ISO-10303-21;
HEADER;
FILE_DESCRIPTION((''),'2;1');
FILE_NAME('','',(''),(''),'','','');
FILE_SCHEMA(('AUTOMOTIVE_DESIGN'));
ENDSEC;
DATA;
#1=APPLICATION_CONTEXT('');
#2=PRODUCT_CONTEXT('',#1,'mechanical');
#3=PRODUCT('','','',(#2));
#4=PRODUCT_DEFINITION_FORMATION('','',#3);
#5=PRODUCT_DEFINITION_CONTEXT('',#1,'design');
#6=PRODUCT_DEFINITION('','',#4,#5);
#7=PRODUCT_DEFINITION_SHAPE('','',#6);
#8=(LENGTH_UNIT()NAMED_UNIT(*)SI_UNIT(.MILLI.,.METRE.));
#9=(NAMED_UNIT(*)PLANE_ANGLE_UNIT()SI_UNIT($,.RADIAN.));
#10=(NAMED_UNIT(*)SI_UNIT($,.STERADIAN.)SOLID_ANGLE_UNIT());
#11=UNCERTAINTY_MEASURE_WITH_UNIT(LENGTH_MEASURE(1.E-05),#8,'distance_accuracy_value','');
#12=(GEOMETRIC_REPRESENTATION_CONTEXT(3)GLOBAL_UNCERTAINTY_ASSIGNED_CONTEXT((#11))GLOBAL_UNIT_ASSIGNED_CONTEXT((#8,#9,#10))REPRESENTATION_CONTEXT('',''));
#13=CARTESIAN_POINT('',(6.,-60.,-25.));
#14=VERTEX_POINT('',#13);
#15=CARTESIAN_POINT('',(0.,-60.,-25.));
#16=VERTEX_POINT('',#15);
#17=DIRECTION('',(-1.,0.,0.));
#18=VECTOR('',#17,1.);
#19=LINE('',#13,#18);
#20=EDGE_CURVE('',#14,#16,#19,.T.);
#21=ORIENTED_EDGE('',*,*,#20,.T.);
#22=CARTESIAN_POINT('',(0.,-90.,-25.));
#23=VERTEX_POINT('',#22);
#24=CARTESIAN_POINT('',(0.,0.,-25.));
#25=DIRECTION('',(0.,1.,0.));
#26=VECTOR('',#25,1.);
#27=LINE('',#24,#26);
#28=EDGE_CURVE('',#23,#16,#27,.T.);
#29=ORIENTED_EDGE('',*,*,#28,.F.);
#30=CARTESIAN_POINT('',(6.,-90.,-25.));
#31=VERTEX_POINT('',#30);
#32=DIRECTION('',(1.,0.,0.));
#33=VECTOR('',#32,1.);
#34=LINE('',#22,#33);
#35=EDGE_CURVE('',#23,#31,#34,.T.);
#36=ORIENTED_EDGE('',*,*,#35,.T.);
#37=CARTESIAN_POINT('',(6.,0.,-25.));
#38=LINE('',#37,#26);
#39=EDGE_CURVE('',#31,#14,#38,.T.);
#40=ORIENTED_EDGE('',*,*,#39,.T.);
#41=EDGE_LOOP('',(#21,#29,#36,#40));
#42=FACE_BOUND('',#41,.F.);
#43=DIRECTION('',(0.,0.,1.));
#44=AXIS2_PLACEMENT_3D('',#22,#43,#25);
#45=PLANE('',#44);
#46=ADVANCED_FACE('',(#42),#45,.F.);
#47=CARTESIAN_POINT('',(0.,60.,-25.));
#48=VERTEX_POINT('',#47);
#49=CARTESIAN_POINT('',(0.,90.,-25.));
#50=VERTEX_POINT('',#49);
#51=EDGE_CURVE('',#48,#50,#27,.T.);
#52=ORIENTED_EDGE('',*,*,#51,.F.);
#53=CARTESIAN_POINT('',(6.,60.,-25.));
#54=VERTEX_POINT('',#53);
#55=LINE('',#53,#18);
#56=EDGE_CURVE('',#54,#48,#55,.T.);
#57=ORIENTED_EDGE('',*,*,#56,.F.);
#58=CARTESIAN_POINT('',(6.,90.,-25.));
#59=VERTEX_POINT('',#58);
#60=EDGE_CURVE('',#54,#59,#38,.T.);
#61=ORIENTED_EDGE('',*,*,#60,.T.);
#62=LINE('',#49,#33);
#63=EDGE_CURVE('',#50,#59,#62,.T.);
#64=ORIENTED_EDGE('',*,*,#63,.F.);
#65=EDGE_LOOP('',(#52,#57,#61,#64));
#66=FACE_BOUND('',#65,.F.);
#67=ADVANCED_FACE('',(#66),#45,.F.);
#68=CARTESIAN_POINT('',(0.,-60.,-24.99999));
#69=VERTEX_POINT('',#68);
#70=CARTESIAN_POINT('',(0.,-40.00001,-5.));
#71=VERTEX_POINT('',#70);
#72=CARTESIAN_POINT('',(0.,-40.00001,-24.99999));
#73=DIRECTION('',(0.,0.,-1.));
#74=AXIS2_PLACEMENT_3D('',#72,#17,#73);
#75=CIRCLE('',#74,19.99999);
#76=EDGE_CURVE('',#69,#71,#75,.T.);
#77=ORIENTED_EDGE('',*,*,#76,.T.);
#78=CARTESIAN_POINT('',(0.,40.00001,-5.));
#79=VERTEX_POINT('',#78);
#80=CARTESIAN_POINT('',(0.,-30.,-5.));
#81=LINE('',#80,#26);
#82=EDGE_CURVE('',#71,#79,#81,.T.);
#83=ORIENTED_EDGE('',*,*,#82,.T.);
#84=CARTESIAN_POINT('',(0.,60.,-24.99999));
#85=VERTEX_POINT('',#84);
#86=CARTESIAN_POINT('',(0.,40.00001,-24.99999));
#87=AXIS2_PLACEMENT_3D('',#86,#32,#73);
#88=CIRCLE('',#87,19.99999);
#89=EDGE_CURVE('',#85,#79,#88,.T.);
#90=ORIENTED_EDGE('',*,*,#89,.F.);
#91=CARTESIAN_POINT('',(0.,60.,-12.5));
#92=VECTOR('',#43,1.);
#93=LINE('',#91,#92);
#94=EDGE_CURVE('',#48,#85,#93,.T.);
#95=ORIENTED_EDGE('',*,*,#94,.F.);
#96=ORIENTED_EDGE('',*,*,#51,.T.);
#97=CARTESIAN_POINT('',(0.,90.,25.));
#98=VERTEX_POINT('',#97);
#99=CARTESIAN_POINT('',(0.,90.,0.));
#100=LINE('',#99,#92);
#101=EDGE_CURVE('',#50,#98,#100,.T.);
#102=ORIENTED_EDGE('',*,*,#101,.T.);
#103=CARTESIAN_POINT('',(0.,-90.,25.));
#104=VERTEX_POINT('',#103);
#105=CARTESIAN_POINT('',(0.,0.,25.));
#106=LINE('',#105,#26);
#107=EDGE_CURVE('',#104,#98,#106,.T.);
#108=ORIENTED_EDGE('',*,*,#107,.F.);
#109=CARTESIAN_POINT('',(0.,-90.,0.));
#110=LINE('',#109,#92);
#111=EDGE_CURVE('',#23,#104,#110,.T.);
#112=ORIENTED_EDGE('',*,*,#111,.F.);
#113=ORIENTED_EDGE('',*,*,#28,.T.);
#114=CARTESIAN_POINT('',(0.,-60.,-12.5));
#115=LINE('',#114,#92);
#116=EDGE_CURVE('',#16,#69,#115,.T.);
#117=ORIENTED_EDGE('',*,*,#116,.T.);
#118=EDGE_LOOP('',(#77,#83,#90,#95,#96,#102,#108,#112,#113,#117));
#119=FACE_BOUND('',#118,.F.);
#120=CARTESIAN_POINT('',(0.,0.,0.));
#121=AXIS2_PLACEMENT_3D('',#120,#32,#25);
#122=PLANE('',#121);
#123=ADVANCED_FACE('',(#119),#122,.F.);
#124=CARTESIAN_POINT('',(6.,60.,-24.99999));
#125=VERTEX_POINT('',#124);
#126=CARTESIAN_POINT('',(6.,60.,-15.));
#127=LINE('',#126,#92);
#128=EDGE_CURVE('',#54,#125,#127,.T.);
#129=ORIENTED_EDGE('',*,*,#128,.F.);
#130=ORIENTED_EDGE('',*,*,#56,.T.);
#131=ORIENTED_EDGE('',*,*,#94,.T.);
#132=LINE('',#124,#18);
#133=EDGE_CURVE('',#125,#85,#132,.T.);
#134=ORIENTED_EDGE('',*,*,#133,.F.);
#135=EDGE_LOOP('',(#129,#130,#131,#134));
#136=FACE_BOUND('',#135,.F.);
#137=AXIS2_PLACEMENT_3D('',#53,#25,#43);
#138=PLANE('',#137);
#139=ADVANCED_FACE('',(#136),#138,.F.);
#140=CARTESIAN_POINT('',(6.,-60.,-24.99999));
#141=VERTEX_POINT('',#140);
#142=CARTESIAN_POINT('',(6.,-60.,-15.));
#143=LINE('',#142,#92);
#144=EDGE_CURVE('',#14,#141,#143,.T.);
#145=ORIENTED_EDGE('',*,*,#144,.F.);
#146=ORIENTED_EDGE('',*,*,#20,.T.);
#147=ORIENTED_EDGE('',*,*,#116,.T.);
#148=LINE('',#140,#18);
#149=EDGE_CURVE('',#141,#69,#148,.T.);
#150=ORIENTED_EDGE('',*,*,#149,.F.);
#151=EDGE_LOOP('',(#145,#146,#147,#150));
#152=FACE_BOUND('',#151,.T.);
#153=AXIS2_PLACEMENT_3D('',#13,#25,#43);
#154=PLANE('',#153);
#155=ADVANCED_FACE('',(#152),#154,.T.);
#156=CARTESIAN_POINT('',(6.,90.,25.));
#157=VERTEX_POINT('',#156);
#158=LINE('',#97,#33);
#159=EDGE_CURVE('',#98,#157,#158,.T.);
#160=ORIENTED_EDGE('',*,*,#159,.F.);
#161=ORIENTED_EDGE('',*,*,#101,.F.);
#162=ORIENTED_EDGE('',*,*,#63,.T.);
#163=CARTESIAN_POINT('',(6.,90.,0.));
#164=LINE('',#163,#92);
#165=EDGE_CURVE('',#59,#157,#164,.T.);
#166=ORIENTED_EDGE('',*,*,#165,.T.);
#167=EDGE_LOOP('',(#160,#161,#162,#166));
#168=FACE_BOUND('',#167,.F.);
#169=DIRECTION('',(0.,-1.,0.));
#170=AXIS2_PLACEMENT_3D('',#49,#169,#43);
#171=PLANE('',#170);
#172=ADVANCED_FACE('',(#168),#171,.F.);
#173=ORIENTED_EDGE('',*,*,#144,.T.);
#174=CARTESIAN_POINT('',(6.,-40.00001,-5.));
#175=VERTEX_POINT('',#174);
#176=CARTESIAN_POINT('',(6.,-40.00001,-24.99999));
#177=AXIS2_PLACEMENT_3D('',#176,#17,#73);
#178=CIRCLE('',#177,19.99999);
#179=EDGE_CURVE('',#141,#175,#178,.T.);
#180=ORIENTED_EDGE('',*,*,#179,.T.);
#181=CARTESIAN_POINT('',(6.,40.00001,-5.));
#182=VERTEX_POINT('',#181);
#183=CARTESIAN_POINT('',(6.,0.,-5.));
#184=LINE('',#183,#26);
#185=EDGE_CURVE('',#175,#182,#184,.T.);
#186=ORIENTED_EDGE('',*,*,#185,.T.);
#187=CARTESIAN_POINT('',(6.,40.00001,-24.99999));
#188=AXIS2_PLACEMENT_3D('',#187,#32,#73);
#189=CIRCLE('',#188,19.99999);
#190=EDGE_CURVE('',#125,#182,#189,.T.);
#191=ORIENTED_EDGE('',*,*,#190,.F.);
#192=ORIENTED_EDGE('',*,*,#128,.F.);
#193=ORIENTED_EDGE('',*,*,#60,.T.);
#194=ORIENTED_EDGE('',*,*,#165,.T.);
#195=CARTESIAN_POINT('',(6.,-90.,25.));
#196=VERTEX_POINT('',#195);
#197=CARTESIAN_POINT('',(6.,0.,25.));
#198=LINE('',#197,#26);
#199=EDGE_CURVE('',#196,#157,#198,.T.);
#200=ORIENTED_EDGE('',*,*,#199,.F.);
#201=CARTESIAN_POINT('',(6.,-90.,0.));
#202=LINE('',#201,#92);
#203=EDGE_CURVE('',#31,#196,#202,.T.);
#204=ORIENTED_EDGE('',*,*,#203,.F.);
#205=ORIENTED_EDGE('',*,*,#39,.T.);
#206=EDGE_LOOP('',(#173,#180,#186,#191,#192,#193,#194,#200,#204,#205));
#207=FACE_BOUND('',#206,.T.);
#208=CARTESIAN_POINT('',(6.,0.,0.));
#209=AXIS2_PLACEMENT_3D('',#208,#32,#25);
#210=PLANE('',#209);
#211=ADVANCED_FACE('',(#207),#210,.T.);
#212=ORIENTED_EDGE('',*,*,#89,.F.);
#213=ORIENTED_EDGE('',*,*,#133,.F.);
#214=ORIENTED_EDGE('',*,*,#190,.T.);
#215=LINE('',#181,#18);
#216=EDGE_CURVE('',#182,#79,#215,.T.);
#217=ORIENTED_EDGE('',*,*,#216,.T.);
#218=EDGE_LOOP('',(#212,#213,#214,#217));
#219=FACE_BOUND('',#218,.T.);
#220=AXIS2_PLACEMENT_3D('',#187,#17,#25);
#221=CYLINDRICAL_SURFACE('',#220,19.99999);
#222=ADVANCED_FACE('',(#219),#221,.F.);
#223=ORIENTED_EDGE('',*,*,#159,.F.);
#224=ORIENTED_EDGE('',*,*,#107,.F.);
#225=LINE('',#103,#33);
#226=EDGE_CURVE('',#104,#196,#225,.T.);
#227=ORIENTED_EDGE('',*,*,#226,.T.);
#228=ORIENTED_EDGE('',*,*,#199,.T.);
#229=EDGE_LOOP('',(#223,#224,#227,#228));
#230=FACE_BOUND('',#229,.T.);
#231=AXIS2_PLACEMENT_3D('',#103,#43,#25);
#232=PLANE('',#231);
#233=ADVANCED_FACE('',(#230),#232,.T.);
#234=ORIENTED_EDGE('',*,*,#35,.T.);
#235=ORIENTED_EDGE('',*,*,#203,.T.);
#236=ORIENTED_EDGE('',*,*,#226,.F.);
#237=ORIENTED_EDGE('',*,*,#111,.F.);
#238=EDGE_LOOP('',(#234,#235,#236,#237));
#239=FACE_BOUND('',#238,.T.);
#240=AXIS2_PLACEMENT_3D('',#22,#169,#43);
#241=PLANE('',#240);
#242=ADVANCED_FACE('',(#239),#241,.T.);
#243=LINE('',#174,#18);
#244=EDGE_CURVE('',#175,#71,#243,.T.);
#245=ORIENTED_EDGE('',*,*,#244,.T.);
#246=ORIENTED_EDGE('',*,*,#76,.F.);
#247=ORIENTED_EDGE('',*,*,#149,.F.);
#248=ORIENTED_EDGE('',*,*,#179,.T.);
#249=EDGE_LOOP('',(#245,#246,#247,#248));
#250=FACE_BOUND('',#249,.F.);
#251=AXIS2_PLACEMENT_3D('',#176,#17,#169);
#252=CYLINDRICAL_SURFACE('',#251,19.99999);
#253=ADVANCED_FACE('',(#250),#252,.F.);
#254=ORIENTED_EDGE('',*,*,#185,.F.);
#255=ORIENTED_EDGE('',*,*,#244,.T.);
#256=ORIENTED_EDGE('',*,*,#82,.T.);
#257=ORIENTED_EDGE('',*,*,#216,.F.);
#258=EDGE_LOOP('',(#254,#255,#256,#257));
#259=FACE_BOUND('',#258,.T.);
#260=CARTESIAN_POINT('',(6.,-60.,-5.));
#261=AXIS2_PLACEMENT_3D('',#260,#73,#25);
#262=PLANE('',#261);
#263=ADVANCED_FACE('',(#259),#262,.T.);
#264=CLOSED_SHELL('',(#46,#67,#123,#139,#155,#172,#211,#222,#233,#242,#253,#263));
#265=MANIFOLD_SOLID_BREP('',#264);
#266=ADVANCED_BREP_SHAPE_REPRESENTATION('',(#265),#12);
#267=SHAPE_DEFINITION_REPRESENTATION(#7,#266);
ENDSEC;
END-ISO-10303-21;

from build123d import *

# Parameters (mm, degrees)
F0_W     = 180
F0_H     = 50
F1_DEPTH = 6
F2_W     = 120
F2_H     = 20
F3_DEPTH = 25
F4_R     = 19.99999


# Not quite as in the source:
# - a fillet or chamfer is up to 0.001 mm smaller than in the source, because OpenCascade refuses the exact size


with BuildPart() as f1:
    # F0 (on Right) → F1 (new body)
    with BuildSketch(Plane.YZ):
        Rectangle(F0_W, F0_H)
    extrude(amount=F1_DEPTH)

    # F2 (on face) → F3 (cut)
    with BuildSketch(Plane.YZ.offset(6)):
        with Locations((0, -15)):
            Rectangle(F2_W, F2_H)
    extrude(amount=-F3_DEPTH, mode=Mode.SUBTRACT)

    # F4 (radius 20 in the source; OpenCascade refuses exactly that, so slightly less here)
    f4_edges = [f1.edges().sort_by_distance(p)[0] for p in [
        (3, 60, -5),
        (3, -60, -5),
    ]]
    fillet(f4_edges, radius=F4_R)


solid = f1.part
